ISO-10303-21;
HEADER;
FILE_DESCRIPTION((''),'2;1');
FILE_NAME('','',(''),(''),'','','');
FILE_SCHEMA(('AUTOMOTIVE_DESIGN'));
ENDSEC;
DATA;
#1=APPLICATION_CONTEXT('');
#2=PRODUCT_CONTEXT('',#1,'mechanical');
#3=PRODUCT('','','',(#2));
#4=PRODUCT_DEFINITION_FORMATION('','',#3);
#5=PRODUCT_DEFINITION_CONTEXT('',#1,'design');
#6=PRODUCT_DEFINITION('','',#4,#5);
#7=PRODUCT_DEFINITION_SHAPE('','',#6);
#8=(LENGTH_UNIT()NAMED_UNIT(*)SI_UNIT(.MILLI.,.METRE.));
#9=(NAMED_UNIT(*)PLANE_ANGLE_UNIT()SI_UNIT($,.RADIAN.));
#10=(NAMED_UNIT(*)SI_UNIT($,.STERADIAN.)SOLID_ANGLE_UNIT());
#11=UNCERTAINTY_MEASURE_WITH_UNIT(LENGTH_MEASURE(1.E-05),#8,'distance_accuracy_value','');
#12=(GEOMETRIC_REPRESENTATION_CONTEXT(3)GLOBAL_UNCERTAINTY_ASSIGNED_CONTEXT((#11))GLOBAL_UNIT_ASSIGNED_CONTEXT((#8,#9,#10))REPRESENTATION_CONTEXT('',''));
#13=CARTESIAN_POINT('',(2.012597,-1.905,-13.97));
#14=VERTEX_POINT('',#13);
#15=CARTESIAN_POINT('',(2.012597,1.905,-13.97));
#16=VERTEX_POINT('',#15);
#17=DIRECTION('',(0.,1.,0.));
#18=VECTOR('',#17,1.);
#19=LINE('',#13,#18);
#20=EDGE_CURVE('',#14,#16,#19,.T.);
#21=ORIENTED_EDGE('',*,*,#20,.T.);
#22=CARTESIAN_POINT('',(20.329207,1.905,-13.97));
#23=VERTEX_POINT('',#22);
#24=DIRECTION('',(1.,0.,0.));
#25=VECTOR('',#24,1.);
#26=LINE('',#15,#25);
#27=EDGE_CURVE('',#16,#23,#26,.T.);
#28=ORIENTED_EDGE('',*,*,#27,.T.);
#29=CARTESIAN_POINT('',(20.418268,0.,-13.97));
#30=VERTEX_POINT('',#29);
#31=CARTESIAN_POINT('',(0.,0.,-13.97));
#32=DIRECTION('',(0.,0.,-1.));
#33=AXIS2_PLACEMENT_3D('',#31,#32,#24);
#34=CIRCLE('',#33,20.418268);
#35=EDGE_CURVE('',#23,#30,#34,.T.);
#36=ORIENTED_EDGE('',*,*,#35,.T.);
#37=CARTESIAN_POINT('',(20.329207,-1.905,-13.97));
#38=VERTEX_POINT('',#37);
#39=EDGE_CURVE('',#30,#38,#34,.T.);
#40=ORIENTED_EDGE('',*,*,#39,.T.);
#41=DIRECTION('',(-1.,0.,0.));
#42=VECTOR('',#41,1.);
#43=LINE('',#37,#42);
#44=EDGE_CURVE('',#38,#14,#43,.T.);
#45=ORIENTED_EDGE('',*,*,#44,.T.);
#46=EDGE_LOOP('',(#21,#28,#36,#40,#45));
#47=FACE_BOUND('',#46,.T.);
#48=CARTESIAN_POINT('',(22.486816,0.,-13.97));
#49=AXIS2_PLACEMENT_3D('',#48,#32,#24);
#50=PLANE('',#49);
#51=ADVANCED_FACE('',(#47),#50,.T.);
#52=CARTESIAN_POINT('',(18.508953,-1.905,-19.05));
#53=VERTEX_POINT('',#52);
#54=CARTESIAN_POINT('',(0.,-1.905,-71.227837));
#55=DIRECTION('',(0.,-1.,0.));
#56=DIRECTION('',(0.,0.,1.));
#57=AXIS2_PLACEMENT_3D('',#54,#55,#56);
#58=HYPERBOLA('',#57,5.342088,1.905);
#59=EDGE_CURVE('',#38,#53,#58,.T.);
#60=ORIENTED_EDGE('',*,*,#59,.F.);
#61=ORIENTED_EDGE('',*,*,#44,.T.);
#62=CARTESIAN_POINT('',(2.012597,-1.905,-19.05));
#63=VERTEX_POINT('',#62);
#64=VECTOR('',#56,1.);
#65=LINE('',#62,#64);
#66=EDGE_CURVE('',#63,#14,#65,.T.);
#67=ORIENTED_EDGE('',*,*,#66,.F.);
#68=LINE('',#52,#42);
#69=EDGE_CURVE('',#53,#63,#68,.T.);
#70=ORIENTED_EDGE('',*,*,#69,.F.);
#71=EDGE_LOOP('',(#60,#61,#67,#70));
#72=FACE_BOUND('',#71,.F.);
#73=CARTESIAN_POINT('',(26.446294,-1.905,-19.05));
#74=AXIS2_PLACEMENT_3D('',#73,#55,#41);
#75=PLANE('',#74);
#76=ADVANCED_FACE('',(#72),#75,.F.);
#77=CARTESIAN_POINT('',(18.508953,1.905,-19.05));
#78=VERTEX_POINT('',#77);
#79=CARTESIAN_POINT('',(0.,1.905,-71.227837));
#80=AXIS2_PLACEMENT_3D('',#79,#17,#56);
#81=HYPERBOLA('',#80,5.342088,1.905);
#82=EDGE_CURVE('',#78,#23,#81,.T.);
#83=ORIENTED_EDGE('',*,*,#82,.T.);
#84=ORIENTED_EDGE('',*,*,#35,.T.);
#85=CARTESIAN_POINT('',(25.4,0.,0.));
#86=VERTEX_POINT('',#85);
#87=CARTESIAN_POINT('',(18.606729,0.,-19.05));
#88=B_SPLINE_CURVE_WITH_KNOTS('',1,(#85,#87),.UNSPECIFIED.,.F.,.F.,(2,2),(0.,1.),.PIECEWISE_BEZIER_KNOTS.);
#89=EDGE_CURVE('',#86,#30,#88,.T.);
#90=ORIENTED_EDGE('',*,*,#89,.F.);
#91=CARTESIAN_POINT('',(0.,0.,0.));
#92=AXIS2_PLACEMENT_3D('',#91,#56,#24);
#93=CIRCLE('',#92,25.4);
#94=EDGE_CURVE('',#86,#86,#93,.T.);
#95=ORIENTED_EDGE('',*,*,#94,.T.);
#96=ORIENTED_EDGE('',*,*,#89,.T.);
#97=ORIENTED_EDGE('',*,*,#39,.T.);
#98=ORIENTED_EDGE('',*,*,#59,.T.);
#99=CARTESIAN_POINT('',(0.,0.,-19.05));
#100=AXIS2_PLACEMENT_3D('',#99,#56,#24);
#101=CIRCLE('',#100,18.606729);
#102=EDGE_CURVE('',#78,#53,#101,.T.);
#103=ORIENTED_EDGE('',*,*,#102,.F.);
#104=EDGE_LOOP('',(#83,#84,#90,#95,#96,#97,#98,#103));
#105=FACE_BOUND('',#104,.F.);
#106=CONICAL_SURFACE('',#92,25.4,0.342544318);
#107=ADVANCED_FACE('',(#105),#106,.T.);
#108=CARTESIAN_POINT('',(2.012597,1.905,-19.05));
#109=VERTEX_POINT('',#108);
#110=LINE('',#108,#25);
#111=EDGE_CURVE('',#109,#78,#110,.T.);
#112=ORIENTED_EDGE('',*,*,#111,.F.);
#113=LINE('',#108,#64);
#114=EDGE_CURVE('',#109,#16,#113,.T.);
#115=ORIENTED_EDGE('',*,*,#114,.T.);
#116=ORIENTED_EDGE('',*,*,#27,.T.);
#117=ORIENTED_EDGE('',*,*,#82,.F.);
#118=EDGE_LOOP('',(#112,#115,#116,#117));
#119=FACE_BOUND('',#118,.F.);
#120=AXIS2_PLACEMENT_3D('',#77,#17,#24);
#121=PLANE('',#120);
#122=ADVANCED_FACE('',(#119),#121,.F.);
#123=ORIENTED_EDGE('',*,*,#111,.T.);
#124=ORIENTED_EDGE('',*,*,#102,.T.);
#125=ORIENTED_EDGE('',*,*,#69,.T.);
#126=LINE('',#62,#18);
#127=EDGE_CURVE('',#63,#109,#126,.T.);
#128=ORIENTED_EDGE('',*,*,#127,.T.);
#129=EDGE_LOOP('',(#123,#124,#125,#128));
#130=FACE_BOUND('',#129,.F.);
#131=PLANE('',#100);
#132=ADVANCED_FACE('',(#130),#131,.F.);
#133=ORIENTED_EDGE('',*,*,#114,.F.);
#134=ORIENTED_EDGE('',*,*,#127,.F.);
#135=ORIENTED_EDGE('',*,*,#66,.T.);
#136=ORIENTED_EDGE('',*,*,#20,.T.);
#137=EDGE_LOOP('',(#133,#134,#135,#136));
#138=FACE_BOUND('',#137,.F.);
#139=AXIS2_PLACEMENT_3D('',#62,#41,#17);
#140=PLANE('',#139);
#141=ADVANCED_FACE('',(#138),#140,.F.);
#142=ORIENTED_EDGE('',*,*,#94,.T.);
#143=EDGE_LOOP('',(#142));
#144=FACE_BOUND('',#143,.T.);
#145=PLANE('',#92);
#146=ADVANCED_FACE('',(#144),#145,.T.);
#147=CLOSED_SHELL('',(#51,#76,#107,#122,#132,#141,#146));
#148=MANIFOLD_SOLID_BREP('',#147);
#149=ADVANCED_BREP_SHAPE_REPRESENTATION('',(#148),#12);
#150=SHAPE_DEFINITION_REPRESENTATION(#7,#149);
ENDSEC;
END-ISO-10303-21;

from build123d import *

# Parameters (mm, degrees)
F0_R     = 25.4
F3_R     = 18.6067290317
F8_DEPTH = 5.08
F9_DEPTH = 5.08


# Not quite as in the source:
# - a feature of the source that left no trace in its solid (it failed there, or was rolled back) is left out


with BuildPart() as f4:
    # F0 (on Top) → F4 section 0
    with BuildSketch(Plane.XY):
        Circle(F0_R)
    # F3 (on plane+point) → F4 section 1
    with BuildSketch(Plane.XY.offset(-19.05)):
        Circle(F3_R)
    loft()

    # F5 (on face) → F8 (cut)
    with BuildSketch(Plane(origin=(0, 0, -19.05), x_dir=(1, 0, 0), z_dir=(0, 0, -1))):
        with BuildLine():
            Line((18.5089529757, 1.905), (2.0125971848, 1.905))
            Line((2.0125971848, 1.905), (2.0125971848, 0))
            Line((2.0125971848, 0), (2.0125971848, -1.905))
            Line((2.0125971848, -1.905), (18.5089529757, -1.905))
            ThreePointArc((18.5089529757, -1.905), (18.5822689403, -0.9537537886), (18.6067290317, 0))
            ThreePointArc((18.6067290317, 0), (18.5822689403, 0.9537537886), (18.5089529757, 1.905))
        make_face()
    extrude(amount=-F8_DEPTH, mode=Mode.SUBTRACT)

    # F5 (on face) → F9 (cut)
    with BuildSketch(Plane(origin=(0, 0, -19.05), x_dir=(1, 0, 0), z_dir=(0, 0, -1))):
        with BuildLine():
            Line((26.4462942035, 1.905), (18.5089529757, 1.905))
            ThreePointArc((18.5089529757, 1.905), (18.5822689403, 0.9537537886), (18.6067290317, 0))
            ThreePointArc((18.6067290317, 0), (18.5822689403, -0.9537537886), (18.5089529757, -1.905))
            Line((18.5089529757, -1.905), (26.4462942035, -1.905))
            Line((26.4462942035, -1.905), (26.4462942035, 1.905))
        make_face()
    extrude(amount=-F9_DEPTH, mode=Mode.SUBTRACT)


solid = f4.part
